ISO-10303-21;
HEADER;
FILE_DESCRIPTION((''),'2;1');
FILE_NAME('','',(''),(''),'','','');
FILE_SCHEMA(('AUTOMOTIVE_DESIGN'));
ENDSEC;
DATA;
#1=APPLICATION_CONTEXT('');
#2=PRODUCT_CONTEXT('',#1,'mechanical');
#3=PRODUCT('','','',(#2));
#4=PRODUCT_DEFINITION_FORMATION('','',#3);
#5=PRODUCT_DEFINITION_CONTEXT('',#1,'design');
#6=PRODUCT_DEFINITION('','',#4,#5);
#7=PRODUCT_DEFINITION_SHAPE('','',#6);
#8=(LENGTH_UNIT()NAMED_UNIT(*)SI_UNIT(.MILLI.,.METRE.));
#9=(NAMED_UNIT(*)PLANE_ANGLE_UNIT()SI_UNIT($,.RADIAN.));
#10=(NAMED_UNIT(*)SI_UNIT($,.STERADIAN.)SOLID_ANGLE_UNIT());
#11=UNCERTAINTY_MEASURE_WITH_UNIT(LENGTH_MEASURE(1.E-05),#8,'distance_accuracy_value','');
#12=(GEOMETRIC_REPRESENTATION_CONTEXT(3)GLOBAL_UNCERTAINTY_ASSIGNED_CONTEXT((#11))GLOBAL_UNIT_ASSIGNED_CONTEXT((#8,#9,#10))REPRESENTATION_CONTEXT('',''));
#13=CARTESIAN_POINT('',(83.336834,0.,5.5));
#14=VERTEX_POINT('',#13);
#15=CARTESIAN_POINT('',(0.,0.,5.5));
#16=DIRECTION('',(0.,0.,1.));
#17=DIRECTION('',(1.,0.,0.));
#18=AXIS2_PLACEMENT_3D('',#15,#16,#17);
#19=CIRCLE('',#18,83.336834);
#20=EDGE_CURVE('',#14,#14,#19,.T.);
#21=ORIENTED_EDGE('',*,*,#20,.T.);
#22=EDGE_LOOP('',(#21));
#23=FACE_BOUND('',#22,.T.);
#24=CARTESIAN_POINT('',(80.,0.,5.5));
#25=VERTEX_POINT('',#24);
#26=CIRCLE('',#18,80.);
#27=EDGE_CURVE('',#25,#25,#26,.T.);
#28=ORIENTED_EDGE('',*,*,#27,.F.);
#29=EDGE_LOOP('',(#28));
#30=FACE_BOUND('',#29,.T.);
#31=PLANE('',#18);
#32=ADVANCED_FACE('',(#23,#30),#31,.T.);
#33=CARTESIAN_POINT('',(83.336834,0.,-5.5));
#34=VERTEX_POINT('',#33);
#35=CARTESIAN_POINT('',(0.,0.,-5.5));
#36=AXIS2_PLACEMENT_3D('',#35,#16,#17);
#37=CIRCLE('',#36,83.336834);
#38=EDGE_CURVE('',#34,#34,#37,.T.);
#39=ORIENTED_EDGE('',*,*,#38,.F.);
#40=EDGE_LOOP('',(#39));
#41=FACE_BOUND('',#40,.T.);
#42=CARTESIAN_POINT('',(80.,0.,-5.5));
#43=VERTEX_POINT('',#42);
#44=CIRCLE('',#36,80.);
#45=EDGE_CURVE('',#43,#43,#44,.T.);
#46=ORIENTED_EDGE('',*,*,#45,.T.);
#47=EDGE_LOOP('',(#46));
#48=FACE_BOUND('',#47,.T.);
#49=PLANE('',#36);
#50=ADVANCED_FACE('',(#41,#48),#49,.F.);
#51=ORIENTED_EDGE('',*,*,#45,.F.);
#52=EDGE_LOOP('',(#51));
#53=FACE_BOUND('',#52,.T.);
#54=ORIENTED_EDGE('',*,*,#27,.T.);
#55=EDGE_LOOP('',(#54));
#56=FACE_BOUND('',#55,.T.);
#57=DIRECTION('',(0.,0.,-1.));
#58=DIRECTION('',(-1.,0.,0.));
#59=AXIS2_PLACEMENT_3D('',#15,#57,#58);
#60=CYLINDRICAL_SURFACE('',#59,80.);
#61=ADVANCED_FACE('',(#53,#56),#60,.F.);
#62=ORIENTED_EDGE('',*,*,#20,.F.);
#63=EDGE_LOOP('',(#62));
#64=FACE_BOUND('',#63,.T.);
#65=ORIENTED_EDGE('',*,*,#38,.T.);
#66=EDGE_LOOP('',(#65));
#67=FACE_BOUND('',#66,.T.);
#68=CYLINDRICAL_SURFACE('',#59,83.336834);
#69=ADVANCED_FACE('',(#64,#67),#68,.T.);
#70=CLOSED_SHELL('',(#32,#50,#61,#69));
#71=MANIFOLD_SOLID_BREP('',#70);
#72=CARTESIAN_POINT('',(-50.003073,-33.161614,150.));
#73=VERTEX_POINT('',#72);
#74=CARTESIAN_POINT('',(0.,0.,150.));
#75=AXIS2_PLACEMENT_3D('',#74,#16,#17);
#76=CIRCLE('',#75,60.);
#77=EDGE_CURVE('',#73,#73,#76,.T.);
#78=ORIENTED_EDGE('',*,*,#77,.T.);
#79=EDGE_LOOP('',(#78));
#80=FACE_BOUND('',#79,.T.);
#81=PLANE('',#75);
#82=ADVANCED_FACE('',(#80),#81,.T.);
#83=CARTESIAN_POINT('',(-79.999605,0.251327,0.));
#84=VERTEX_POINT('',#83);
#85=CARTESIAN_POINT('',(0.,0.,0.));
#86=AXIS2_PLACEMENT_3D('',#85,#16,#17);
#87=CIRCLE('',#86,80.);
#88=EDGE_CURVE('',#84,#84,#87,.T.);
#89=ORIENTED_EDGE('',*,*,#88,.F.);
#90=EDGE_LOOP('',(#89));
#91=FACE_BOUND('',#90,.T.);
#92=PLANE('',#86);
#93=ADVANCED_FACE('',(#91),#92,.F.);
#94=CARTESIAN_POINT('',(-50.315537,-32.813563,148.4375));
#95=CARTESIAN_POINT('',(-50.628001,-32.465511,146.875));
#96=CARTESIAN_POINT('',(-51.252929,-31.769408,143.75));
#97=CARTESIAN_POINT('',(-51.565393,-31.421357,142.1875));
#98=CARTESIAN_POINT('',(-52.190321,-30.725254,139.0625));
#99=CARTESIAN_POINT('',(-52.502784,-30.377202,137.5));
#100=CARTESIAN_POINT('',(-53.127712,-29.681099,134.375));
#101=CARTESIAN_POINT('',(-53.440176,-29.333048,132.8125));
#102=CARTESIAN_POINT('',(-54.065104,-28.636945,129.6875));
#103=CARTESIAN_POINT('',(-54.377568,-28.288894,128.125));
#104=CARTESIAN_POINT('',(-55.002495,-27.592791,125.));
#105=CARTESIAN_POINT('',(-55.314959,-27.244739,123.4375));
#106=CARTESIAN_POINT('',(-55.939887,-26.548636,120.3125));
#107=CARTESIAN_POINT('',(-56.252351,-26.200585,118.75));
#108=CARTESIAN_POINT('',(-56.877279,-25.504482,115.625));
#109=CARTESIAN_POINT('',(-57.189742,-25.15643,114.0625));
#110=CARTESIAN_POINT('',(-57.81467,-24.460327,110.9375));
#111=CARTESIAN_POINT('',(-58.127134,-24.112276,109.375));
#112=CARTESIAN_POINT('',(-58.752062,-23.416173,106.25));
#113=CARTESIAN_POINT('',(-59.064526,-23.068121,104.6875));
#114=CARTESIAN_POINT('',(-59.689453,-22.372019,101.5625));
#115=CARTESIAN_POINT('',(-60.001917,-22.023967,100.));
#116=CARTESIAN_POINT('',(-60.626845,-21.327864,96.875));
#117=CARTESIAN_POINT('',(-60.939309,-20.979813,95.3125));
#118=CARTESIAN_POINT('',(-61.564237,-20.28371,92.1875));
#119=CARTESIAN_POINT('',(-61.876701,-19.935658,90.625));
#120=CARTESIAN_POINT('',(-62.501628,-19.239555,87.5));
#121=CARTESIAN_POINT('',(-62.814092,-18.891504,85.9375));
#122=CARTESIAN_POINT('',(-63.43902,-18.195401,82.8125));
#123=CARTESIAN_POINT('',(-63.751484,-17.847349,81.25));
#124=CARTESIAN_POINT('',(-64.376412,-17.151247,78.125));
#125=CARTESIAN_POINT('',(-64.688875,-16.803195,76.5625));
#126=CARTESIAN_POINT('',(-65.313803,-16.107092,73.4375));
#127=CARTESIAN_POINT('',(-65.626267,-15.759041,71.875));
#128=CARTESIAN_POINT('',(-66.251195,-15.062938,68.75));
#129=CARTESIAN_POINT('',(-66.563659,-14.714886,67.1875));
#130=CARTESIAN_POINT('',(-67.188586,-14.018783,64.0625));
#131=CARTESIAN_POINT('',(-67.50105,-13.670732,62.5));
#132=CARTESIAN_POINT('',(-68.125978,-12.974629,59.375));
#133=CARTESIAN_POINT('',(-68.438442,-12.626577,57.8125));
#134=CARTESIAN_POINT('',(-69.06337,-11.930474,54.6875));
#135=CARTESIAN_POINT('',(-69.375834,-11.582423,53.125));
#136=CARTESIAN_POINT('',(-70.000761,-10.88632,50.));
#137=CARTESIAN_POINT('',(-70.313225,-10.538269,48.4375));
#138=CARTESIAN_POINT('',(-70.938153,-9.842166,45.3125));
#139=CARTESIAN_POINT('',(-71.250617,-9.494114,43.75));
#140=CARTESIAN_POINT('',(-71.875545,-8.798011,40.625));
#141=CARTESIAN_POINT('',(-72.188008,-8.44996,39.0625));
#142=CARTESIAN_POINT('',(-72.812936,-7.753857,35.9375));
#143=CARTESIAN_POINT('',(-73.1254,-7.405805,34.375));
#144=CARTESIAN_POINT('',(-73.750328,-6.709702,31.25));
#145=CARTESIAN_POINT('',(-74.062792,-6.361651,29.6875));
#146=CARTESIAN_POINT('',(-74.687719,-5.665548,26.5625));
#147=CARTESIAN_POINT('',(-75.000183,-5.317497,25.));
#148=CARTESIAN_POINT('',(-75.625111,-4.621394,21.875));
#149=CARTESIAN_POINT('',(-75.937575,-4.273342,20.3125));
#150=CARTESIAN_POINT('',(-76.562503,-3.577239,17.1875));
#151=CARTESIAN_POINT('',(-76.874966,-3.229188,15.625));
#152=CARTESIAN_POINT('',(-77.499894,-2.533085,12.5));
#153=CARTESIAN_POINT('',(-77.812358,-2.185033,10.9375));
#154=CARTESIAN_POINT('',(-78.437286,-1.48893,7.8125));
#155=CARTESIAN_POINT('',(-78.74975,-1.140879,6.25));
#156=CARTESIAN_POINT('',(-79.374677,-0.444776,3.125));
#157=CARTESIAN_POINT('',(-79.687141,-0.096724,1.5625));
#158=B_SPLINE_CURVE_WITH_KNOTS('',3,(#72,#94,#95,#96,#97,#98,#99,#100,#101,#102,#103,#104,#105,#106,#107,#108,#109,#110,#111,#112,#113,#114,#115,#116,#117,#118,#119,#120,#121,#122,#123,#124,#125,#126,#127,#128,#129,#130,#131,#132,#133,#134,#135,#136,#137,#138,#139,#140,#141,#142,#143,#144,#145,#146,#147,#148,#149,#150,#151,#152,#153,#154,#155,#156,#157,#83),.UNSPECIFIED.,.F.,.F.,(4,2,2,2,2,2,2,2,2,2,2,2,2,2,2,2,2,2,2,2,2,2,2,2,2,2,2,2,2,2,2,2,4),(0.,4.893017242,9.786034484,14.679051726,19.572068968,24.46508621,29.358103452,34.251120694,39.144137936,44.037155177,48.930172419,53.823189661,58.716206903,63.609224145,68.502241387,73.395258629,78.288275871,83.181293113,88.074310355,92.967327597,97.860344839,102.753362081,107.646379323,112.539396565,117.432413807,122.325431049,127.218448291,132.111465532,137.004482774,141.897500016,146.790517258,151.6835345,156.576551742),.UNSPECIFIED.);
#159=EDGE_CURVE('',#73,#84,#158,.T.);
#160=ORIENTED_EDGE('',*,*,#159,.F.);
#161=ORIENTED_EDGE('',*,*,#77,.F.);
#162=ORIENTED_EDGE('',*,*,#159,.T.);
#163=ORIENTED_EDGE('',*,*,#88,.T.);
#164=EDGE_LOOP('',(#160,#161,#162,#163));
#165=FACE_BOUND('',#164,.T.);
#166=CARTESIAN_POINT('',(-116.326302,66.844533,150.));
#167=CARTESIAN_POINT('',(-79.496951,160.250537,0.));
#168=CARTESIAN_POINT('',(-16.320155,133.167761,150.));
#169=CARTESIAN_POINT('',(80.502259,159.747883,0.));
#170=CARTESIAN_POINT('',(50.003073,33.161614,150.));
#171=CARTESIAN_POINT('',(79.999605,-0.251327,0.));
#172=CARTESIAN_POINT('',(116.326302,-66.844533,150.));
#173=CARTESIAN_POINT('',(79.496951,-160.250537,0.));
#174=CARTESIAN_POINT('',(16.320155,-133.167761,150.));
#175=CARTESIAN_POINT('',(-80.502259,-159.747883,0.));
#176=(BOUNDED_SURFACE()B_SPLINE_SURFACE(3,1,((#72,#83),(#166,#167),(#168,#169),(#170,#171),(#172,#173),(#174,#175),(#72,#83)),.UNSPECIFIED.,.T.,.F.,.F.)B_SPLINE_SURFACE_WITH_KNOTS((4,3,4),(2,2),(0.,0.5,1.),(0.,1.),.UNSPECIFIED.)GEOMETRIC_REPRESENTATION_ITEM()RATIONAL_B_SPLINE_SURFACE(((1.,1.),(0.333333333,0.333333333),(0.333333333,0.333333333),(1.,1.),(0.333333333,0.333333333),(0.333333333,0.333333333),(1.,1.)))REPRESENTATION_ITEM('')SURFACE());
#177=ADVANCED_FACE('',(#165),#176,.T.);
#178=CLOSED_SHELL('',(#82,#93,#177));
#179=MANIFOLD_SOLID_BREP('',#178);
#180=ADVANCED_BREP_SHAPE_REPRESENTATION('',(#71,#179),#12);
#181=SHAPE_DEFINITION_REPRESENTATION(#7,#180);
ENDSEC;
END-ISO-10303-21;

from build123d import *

# Parameters (mm, degrees)
SKETCH1_5_R         = 83.336833521
SKETCH1_5_R_2       = 80
BOSS_EXTRUDE1_DEPTH = 5.5


with BuildPart() as part:
    # Loft1: read off the stored shape, not the designer's step
    # Loft1: loft between two sections, ruled curve by curve
    loft1_from = [
        Edge.make_bspline([(-50.003073395, -33.16161412, 150), (-116.326301635, 66.844532671, 150), (-16.320154844, 133.16776091, 150), (50.003073395, 33.16161412, 150), (116.326301635, -66.844532671, 150), (16.320154844, -133.16776091, 150), (-50.003073395, -33.16161412, 150)], [0, 0, 0, 0, 0.5, 0.5, 0.5, 1, 1, 1, 1], 3, [1, 0.333333333, 0.333333333, 1, 0.333333333, 0.333333333, 1]),
    ]
    loft1_to = [
        Edge.make_bspline([(-79.999605216, 0.251326999, 0), (-79.496951218, 160.250537431, 0), (80.502259214, 159.747883433, 0), (79.999605216, -0.251326999, 0), (79.496951218, -160.250537431, 0), (-80.502259214, -159.747883433, 0), (-79.999605216, 0.251326999, 0)], [0, 0, 0, 0, 0.5, 0.5, 0.5, 1, 1, 1, 1], 3, [1, 0.333333333, 0.333333333, 1, 0.333333333, 0.333333333, 1]),
    ]
    loft1 = Solid(Shell([*[Face.make_surface_from_curves(loft1_from[k], loft1_to[k]) for k in range(1)], Face(Wire(loft1_from)), Face(Wire(loft1_to))]))
    add(loft1)


with BuildPart() as body_2:
    # Sketch1<5> → Boss-Extrude1 (new, symmetric)
    with BuildSketch(Plane.XY):
        Circle(SKETCH1_5_R)
        Circle(SKETCH1_5_R_2, mode=Mode.SUBTRACT)
    extrude(amount=BOSS_EXTRUDE1_DEPTH, both=True)


solid = Compound([part.part, body_2.part])
